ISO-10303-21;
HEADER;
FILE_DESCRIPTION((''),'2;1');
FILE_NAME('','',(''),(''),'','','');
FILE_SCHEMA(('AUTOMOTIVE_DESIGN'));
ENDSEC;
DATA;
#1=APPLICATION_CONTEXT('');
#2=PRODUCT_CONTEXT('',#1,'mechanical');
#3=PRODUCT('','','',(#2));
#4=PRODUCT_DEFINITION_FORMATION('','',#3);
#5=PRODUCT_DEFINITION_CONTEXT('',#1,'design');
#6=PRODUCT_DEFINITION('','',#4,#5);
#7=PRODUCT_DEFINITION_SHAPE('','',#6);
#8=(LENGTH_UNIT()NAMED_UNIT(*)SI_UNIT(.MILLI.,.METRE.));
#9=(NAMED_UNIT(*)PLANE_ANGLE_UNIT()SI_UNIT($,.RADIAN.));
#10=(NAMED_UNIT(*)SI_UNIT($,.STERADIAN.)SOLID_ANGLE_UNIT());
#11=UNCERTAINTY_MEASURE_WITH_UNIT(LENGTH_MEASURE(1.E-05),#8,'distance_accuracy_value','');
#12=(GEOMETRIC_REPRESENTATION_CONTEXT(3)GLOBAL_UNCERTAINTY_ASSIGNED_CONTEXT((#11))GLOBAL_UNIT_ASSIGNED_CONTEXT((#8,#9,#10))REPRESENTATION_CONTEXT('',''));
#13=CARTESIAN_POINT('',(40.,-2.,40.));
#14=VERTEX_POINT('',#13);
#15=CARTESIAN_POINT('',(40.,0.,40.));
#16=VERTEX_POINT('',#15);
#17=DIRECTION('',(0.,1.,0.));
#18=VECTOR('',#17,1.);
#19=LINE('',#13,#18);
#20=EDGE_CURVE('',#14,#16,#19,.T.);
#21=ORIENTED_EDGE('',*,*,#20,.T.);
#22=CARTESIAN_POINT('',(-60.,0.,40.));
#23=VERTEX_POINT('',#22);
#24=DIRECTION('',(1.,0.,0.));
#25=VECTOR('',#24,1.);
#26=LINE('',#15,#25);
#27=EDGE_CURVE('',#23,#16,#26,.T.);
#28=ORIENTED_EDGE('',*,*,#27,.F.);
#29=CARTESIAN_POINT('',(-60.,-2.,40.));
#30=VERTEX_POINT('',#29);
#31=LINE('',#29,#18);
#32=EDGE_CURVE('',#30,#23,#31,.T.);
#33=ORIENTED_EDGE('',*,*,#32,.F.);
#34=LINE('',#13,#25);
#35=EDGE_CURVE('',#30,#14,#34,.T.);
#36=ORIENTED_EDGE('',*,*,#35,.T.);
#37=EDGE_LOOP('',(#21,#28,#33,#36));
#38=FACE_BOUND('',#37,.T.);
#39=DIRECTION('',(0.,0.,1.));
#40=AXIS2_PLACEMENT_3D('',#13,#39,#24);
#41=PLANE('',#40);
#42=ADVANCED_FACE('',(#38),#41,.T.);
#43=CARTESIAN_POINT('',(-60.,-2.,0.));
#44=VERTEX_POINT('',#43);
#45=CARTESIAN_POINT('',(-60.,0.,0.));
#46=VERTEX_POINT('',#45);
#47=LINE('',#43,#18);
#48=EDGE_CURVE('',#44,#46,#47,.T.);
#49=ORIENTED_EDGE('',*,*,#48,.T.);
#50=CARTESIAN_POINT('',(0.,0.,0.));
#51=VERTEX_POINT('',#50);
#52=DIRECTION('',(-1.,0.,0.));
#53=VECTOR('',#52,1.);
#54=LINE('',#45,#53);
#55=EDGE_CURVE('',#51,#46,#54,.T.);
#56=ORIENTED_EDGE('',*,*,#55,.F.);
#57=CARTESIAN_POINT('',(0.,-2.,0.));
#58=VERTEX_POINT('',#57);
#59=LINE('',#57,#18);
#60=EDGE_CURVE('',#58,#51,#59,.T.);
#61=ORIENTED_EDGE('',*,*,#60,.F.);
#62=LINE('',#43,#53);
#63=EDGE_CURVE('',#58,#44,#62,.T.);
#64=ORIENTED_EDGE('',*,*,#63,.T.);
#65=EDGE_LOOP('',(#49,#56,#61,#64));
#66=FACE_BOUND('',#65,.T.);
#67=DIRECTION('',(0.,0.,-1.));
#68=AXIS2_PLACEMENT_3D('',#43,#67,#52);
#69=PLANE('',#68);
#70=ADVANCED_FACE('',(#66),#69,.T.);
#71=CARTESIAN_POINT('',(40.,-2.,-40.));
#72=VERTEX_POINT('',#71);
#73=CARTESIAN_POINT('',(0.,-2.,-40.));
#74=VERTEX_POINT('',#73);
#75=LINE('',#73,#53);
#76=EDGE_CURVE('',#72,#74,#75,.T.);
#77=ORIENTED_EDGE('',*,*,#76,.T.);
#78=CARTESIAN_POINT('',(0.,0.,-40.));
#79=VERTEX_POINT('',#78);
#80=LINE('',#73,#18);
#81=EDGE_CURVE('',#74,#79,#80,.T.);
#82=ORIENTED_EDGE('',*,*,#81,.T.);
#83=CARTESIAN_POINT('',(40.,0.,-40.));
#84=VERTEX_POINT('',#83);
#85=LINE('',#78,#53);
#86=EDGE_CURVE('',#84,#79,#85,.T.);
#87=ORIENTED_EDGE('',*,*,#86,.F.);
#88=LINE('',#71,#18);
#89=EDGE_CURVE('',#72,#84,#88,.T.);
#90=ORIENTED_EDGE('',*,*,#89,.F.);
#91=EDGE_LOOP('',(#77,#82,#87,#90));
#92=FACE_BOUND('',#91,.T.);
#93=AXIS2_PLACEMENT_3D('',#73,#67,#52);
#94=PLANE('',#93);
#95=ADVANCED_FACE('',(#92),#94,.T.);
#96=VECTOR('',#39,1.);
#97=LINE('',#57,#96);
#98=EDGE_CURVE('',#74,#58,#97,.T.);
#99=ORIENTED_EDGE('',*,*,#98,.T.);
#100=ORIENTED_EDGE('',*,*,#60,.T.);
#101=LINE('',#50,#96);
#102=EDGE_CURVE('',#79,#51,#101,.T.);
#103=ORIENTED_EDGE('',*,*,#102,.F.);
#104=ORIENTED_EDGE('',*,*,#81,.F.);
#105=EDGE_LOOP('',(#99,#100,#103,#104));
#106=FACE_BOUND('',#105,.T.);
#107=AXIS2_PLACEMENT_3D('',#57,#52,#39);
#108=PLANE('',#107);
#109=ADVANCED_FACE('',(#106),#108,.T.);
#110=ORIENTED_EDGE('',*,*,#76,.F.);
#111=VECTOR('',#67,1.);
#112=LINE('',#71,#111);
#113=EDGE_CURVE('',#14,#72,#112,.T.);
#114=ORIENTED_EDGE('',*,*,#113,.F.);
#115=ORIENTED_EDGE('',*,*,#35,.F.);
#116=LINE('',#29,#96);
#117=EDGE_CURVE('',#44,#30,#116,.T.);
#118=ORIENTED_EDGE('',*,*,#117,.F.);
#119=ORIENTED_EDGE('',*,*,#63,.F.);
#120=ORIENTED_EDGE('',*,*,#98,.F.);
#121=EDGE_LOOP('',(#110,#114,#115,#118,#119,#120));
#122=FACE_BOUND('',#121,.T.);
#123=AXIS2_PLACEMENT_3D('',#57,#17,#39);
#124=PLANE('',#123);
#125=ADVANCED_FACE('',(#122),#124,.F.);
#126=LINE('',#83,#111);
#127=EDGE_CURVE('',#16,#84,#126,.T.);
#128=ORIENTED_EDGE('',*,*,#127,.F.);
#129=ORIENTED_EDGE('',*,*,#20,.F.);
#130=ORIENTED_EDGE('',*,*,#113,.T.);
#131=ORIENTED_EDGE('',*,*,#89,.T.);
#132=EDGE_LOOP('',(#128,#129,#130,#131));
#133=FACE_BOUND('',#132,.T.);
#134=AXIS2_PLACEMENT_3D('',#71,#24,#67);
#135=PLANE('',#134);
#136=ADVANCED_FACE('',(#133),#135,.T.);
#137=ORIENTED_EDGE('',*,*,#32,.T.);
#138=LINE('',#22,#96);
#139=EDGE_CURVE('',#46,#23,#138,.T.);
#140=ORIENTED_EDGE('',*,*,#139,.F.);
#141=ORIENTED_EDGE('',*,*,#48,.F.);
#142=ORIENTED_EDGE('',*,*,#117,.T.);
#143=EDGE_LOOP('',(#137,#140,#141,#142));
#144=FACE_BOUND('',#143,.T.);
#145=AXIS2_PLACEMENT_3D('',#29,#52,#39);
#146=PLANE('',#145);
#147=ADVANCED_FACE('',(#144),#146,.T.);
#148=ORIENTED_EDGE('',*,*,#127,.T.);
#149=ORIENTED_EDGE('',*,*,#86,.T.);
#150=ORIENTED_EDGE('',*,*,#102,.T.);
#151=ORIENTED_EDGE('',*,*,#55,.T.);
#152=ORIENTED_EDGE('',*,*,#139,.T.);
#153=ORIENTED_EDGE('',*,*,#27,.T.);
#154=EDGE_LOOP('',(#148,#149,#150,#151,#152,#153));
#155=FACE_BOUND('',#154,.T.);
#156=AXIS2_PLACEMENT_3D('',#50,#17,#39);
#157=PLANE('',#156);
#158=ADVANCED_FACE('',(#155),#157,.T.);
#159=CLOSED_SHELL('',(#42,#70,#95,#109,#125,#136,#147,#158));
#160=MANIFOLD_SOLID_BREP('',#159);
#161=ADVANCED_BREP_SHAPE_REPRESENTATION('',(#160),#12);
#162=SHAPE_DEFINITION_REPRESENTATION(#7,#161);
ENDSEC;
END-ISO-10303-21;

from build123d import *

# Parameters (mm, degrees)
SM_BASE_FLANGE_1_DEPTH = 2


# Sheet-metal steps are written as plain solids
with BuildPart() as part:
    # Sketch 1 → 基体-法兰1 (new body)
    with BuildSketch(Plane(origin=(0, 0, 0), x_dir=(1, 0, 0), z_dir=(0, 1, 0))):
        Polygon((0, 0), (0, 40), (40, 40), (40, -40), (-60, -40), (-60, 0), align=None)
    extrude(amount=-SM_BASE_FLANGE_1_DEPTH)


solid = part.part
